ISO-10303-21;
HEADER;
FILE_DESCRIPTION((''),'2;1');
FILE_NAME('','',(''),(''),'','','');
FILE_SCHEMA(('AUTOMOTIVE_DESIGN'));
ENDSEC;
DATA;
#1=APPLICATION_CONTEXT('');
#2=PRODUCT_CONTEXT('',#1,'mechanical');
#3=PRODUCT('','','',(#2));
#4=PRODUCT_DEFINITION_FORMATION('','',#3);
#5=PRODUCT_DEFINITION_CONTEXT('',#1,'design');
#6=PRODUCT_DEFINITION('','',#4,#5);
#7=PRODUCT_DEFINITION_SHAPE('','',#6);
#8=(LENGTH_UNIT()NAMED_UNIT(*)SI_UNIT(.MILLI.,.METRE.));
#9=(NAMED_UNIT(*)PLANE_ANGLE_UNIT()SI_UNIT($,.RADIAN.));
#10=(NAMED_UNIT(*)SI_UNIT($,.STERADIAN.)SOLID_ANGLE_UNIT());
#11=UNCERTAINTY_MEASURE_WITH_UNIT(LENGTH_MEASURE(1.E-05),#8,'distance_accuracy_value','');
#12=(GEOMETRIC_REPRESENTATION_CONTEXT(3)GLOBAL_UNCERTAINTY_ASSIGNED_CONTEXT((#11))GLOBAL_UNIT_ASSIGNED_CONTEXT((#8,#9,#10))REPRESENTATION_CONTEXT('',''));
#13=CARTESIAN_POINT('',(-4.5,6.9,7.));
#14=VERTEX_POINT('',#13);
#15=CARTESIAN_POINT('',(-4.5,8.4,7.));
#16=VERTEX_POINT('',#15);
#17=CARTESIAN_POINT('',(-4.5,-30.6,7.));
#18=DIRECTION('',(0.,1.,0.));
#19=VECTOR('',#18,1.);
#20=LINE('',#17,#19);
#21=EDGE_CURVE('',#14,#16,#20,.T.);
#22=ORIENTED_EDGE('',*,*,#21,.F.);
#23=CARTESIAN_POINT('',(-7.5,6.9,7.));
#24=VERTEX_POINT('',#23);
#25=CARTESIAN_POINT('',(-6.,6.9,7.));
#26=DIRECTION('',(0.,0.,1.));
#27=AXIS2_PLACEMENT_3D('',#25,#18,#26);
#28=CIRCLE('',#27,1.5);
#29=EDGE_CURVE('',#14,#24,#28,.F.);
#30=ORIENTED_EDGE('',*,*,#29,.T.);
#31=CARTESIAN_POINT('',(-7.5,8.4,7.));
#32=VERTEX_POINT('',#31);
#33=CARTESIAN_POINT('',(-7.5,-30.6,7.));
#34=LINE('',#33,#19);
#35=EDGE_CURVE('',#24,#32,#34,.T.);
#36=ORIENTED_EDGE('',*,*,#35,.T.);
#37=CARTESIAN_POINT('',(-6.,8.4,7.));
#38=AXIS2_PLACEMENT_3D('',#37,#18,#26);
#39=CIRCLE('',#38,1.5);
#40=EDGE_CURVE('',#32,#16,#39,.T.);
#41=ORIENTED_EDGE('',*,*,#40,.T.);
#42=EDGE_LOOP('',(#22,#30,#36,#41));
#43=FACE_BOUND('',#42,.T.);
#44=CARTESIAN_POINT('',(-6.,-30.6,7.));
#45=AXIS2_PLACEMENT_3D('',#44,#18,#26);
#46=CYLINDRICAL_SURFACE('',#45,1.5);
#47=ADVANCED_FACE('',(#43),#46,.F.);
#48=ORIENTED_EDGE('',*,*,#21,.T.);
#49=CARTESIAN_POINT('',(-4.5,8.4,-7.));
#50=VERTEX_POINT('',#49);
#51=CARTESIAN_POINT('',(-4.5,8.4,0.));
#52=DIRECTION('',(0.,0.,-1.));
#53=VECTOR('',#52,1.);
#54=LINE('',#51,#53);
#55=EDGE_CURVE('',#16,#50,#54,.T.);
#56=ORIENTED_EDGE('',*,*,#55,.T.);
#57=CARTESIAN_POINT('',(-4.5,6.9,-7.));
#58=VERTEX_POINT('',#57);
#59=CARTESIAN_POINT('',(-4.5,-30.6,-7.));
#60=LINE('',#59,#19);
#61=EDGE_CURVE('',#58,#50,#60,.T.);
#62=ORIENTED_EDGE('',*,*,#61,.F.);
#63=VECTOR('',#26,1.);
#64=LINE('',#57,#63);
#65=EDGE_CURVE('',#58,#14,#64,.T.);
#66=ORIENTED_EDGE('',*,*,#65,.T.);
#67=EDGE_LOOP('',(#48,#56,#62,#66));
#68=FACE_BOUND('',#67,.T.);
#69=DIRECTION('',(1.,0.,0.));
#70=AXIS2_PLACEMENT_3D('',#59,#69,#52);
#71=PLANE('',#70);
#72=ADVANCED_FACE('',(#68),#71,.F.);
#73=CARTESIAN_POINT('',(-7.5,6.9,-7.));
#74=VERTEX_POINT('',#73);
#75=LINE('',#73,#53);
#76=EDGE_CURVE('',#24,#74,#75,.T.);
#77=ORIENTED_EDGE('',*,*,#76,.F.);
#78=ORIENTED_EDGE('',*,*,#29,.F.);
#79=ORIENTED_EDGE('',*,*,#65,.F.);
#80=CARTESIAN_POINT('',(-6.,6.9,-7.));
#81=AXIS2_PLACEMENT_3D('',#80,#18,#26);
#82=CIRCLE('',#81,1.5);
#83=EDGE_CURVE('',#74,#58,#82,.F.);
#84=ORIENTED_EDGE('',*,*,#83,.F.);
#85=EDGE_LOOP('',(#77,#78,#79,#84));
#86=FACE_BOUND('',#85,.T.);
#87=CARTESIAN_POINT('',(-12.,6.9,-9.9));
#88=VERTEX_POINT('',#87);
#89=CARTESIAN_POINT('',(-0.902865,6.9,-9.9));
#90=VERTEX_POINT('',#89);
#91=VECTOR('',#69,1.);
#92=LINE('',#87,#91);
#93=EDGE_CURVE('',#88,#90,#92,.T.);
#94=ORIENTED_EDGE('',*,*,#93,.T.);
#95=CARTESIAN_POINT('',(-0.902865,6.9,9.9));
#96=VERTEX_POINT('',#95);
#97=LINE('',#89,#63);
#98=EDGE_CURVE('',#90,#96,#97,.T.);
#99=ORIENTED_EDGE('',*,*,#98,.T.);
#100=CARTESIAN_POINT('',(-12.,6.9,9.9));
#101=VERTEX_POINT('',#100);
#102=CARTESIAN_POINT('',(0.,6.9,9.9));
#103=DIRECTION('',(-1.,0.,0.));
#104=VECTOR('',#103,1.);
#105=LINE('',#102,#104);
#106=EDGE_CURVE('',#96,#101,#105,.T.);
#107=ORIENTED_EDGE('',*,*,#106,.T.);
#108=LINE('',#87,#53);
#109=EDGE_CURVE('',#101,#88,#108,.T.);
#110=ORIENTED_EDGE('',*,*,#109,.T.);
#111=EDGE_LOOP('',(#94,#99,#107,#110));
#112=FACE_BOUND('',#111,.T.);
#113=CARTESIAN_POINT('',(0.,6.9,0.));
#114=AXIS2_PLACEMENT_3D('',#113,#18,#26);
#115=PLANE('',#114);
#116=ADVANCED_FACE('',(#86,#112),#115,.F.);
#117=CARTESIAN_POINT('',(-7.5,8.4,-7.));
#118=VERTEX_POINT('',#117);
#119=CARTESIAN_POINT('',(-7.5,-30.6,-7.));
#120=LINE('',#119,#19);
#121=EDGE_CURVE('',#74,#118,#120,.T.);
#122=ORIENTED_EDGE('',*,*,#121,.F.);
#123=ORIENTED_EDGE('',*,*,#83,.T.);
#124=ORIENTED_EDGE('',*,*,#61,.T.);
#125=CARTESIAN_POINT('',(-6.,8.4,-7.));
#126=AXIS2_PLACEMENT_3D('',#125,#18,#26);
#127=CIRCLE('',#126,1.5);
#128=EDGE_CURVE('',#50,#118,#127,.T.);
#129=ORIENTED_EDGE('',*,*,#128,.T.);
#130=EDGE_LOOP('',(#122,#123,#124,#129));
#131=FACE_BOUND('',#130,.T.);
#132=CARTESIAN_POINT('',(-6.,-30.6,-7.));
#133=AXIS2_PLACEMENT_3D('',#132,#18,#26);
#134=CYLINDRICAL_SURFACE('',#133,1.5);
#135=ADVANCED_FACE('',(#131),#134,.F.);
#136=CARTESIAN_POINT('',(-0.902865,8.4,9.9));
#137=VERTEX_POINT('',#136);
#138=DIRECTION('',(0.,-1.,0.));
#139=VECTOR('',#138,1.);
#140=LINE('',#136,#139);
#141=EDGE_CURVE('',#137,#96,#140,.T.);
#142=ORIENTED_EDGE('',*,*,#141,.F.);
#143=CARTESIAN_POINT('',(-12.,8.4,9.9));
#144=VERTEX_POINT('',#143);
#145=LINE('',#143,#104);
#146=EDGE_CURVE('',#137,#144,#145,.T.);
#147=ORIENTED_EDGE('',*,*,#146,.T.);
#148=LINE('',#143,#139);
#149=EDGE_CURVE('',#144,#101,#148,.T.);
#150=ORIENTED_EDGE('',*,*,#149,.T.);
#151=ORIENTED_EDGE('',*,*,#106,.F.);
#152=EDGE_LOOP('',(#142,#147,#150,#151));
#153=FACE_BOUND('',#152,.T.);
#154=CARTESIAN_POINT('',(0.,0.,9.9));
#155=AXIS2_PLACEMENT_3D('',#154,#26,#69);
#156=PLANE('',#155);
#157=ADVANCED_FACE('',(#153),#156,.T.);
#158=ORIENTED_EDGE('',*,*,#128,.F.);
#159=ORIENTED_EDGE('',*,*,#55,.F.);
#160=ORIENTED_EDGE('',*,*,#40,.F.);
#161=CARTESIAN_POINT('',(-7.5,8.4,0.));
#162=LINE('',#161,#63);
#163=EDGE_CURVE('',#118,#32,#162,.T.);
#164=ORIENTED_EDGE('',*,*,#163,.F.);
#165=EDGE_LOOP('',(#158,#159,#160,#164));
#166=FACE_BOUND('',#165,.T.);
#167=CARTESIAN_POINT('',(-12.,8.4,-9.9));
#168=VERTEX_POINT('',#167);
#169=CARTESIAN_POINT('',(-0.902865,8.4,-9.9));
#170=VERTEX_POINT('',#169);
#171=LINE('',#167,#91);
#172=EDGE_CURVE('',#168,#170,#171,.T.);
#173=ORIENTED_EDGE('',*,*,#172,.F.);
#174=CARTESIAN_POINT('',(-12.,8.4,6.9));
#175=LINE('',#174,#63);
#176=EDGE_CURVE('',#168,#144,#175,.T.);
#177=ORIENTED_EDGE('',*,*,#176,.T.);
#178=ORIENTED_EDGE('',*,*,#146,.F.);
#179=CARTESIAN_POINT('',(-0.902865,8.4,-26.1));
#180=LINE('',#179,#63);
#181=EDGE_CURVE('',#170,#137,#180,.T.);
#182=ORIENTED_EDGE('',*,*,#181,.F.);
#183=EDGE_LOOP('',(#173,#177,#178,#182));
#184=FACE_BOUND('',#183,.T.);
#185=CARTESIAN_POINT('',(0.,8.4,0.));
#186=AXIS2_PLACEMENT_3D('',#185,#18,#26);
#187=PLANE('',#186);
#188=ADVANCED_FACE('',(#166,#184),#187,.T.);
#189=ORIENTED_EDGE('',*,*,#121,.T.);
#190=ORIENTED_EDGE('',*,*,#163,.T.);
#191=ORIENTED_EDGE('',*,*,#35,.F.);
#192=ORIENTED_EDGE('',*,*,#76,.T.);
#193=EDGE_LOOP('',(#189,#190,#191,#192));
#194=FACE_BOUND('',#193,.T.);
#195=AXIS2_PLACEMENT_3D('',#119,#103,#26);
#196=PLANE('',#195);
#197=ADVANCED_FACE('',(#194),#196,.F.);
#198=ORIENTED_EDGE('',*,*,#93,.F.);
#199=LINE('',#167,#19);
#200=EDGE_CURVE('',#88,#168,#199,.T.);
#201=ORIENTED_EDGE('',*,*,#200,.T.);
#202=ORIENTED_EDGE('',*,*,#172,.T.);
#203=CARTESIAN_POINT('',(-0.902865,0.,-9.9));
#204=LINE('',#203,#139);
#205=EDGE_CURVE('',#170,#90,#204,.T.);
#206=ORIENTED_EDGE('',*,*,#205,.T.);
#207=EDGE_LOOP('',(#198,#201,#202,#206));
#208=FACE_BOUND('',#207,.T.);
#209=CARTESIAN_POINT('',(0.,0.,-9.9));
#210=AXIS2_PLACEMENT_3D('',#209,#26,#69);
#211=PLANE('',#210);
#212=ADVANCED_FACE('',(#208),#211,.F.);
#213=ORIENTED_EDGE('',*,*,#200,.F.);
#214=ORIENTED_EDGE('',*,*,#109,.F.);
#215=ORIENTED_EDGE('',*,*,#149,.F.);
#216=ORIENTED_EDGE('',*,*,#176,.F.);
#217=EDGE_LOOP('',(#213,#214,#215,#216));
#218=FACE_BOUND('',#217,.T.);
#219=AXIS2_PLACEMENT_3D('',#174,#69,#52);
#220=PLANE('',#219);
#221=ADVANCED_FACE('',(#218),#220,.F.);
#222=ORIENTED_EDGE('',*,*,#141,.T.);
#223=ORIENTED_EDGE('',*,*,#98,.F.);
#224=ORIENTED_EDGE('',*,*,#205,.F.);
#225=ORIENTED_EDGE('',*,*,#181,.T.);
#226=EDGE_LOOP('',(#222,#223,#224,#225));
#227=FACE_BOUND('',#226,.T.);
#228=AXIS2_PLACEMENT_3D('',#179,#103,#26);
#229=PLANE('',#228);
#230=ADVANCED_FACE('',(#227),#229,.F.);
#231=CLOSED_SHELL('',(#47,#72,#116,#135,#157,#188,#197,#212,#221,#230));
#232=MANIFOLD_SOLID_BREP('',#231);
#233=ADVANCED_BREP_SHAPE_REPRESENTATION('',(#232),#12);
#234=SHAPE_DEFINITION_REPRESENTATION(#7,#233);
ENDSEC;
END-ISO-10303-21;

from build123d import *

# Parameters (mm, degrees)
SKETCH1_W               = 13.8
SKETCH1_H               = 8.8
BOSS_EXTRUDE1_DEPTH     = 3
SKETCH2_W               = 2
SKETCH2_H               = 35
BOSS_EXTRUDE2_DEPTH     = 3
SKETCH3_W               = 1.2
SKETCH3_H               = 6
BOSS_EXTRUDE3_DEPTH     = 7
FILLET3_R               = 10
SKETCH5_W               = 15
SKETCH5_H               = 13.8
BOSS_EXTRUDE4_DEPTH     = 4
SKETCH6_R               = 1.5
CUT_EXTRUDE4_DEPTH      = 38.968539608
BOSS_EXTRUDE5_DEPTH     = 2
CHAMFER2_SIZE           = 3
BOSS_EXTRUDE7_DEPTH     = 1.2
SKETCH12_W              = 15
SKETCH12_H              = 4
BOSS_EXTRUDE8_DEPTH     = 3
SKETCH13_W              = 15
SKETCH13_H              = 4
BOSS_EXTRUDE9_DEPTH     = 3
CUT_EXTRUDE7_DEPTH      = 43.28486727
CUT_EXTRUDE7_DEPTH_BACK = 43.28486727
CUT_EXTRUDE8_DEPTH      = 43.28486727
CUT_EXTRUDE8_DEPTH_BACK = 43.28486727
SKETCH15_W              = 0.807911756
SKETCH15_H              = 0.64
CUT_EXTRUDE9_DEPTH      = 41.244591358
CUT_EXTRUDE9_DEPTH_BACK = 41.244591358
SKETCH16_W              = 0.64
SKETCH16_H              = 0.6
CHAMFER3_SIZE           = 1
SKETCH18_W              = 20.701942652
SKETCH18_H              = 41.728044518
CUT_EXTRUDE10_DEPTH     = 36
SKETCH19_W              = 11.097134513
SKETCH19_H              = 20.928514419
CUT_EXTRUDE11_DEPTH     = 2.5


# Some blends are built 0.0001 mm under size
with BuildPart() as part:
    # Sketch1 → Boss-Extrude1 (new body)
    with BuildSketch(Plane(origin=(0, 0, 0), x_dir=(0, 0, -1), z_dir=(1, 0, 0))):
        Rectangle(SKETCH1_W, SKETCH1_H)
    extrude(amount=BOSS_EXTRUDE1_DEPTH)

    # Sketch2 → Boss-Extrude2 (add)
    with BuildSketch(Plane(origin=(3, 0, 0), x_dir=(0, 0, -1), z_dir=(1, 0, 0))):
        with Locations((0, -13.1)):
            Rectangle(SKETCH2_W, SKETCH2_H)
    extrude(amount=BOSS_EXTRUDE2_DEPTH)

    # Sketch3 → Boss-Extrude3 (add)
    with BuildSketch(Plane(origin=(6, 0, 0), x_dir=(0, 0, -1), z_dir=(1, 0, 0))):
        with Locations((0, -27.6)):
            Rectangle(SKETCH3_W, SKETCH3_H)
    extrude(amount=BOSS_EXTRUDE3_DEPTH)

    # Fillet3
    # the kernel refuses this fillet: 10 mm, written as the material it adds along each edge
    with BuildSketch(Plane(origin=(3, -4.4, 1), x_dir=(-1, 0, 0), z_dir=(0, 0, -1))) as fillet3_piece_1:
        with BuildLine():
            CenterArc((10, -7.141428429), FILLET3_R, 134.427004001, 45.572995999)
            Line((0, -7.141428429), (0, 0))
            Line((0, 0), (3, 0))
        make_face()
    extrude(amount=2)

    # Sketch5 → Boss-Extrude4 (add)
    with BuildSketch(Plane(origin=(0, 4.4, 0), x_dir=(1, 0, 0), z_dir=(0, 1, 0))):
        with Locations((-4.5, 0)):
            Rectangle(SKETCH5_W, SKETCH5_H)
    extrude(amount=BOSS_EXTRUDE4_DEPTH)

    # Sketch6 → Cut-Extrude4 (cut, through all)
    with BuildSketch(Plane.XZ.offset(-4.4)):
        with Locations(Location((-6, 3, 0), (0, 0, 270))):
            Circle(SKETCH6_R)
        with Locations(Location((-6, -3, 0), (0, 0, 270))):
            Circle(SKETCH6_R)
    extrude(amount=-CUT_EXTRUDE4_DEPTH, mode=Mode.SUBTRACT)

    # Sketch8 → Boss-Extrude5 (add)
    with BuildSketch(Plane(origin=(0, 0, -1), x_dir=(-1, 0, 0), z_dir=(0, 0, -1))):
        Polygon((-3, -18.758153574), (0, -4.4), (-3, -4.4), align=None)
    extrude(amount=-BOSS_EXTRUDE5_DEPTH)

    # Chamfer2
    chamfer2_edges = [part.edges().sort_by_distance(p)[0] for p in [
        (3, 4.4, 0),
    ]]
    chamfer(chamfer2_edges, length=CHAMFER2_SIZE - 0.0001)  # a hair under: the kernel refuses the full size

    # Sketch11 → Boss-Extrude7 (add)
    with BuildSketch(Plane(origin=(0, 0, -0.6), x_dir=(-1, 0, 0), z_dir=(0, 0, -1))):
        Polygon((-6, -24.6), (-13, -24.6), (-6, 1.742521041), align=None)
    extrude(amount=-BOSS_EXTRUDE7_DEPTH)

    # Sketch12 → Boss-Extrude8 (add)
    with BuildSketch(Plane(origin=(0, 0, -6.9), x_dir=(-1, 0, 0), z_dir=(0, 0, -1))):
        with Locations((4.5, 6.4)):
            Rectangle(SKETCH12_W, SKETCH12_H)
    extrude(amount=BOSS_EXTRUDE8_DEPTH)

    # Sketch13 → Boss-Extrude9 (add)
    with BuildSketch(Plane.XY.offset(6.9)):
        with Locations((-4.5, 6.4)):
            Rectangle(SKETCH13_W, SKETCH13_H)
    extrude(amount=BOSS_EXTRUDE9_DEPTH)

    # Sketch14 → Cut-Extrude7 (cut, two sides: drawn at the far end of the back side and taken through both)
    with BuildSketch(Plane(origin=(0, 8.4, 0), x_dir=(1, 0, 0), z_dir=(0, 1, 0)).offset(-CUT_EXTRUDE7_DEPTH_BACK)):
        with BuildLine():
            Line((-7.5, 7), (-7.5, -7))
            ThreePointArc((-7.5, -7), (-6, -8.5), (-4.5, -7))
            Line((-4.5, -7), (-4.5, 7))
            ThreePointArc((-4.5, 7), (-6, 8.5), (-7.5, 7))
        make_face()
    extrude(amount=CUT_EXTRUDE7_DEPTH + CUT_EXTRUDE7_DEPTH_BACK, mode=Mode.SUBTRACT)

    # Sketch15 → Cut-Extrude8 (cut, two sides: drawn at the far end of the back side and taken through both)
    with BuildSketch(Plane.XZ.offset(30.6).offset(-CUT_EXTRUDE8_DEPTH_BACK)):
        with Locations((12.596044122, 0)):
            Rectangle(SKETCH15_W, SKETCH15_H)
    extrude(amount=CUT_EXTRUDE8_DEPTH + CUT_EXTRUDE8_DEPTH_BACK, mode=Mode.SUBTRACT)

    # Sketch16 → Cut-Extrude9 (cut, two sides: drawn at the far end of the back side and taken through both)
    with BuildSketch(Plane(origin=(12.192088244, 0, 0), x_dir=(0, 0, -1), z_dir=(1, 0, 0)).offset(-CUT_EXTRUDE9_DEPTH_BACK)):
        with Locations((0, -30.3)):
            Rectangle(SKETCH16_W, SKETCH16_H)
    extrude(amount=CUT_EXTRUDE9_DEPTH + CUT_EXTRUDE9_DEPTH_BACK, mode=Mode.SUBTRACT)

    # Chamfer3
    chamfer3_edges = [part.edges().sort_by_distance(p)[0] for p in [
        (12.192088244, -30, 0),
    ]]
    chamfer(chamfer3_edges, length=CHAMFER3_SIZE)

    # Sketch18 → Cut-Extrude10 (cut)
    with BuildSketch(Plane.XY.offset(9.9)):
        with Locations((9.448105839, -12.464022259)):
            Rectangle(SKETCH18_W, SKETCH18_H)
    extrude(amount=-CUT_EXTRUDE10_DEPTH, mode=Mode.SUBTRACT)

    # Sketch19 → Cut-Extrude11 (cut)
    with BuildSketch(Plane.XZ.offset(-4.4)):
        with Locations((-6.451432743, 0.56425721)):
            Rectangle(SKETCH19_W, SKETCH19_H)
    extrude(amount=-CUT_EXTRUDE11_DEPTH, mode=Mode.SUBTRACT)


solid = part.part
